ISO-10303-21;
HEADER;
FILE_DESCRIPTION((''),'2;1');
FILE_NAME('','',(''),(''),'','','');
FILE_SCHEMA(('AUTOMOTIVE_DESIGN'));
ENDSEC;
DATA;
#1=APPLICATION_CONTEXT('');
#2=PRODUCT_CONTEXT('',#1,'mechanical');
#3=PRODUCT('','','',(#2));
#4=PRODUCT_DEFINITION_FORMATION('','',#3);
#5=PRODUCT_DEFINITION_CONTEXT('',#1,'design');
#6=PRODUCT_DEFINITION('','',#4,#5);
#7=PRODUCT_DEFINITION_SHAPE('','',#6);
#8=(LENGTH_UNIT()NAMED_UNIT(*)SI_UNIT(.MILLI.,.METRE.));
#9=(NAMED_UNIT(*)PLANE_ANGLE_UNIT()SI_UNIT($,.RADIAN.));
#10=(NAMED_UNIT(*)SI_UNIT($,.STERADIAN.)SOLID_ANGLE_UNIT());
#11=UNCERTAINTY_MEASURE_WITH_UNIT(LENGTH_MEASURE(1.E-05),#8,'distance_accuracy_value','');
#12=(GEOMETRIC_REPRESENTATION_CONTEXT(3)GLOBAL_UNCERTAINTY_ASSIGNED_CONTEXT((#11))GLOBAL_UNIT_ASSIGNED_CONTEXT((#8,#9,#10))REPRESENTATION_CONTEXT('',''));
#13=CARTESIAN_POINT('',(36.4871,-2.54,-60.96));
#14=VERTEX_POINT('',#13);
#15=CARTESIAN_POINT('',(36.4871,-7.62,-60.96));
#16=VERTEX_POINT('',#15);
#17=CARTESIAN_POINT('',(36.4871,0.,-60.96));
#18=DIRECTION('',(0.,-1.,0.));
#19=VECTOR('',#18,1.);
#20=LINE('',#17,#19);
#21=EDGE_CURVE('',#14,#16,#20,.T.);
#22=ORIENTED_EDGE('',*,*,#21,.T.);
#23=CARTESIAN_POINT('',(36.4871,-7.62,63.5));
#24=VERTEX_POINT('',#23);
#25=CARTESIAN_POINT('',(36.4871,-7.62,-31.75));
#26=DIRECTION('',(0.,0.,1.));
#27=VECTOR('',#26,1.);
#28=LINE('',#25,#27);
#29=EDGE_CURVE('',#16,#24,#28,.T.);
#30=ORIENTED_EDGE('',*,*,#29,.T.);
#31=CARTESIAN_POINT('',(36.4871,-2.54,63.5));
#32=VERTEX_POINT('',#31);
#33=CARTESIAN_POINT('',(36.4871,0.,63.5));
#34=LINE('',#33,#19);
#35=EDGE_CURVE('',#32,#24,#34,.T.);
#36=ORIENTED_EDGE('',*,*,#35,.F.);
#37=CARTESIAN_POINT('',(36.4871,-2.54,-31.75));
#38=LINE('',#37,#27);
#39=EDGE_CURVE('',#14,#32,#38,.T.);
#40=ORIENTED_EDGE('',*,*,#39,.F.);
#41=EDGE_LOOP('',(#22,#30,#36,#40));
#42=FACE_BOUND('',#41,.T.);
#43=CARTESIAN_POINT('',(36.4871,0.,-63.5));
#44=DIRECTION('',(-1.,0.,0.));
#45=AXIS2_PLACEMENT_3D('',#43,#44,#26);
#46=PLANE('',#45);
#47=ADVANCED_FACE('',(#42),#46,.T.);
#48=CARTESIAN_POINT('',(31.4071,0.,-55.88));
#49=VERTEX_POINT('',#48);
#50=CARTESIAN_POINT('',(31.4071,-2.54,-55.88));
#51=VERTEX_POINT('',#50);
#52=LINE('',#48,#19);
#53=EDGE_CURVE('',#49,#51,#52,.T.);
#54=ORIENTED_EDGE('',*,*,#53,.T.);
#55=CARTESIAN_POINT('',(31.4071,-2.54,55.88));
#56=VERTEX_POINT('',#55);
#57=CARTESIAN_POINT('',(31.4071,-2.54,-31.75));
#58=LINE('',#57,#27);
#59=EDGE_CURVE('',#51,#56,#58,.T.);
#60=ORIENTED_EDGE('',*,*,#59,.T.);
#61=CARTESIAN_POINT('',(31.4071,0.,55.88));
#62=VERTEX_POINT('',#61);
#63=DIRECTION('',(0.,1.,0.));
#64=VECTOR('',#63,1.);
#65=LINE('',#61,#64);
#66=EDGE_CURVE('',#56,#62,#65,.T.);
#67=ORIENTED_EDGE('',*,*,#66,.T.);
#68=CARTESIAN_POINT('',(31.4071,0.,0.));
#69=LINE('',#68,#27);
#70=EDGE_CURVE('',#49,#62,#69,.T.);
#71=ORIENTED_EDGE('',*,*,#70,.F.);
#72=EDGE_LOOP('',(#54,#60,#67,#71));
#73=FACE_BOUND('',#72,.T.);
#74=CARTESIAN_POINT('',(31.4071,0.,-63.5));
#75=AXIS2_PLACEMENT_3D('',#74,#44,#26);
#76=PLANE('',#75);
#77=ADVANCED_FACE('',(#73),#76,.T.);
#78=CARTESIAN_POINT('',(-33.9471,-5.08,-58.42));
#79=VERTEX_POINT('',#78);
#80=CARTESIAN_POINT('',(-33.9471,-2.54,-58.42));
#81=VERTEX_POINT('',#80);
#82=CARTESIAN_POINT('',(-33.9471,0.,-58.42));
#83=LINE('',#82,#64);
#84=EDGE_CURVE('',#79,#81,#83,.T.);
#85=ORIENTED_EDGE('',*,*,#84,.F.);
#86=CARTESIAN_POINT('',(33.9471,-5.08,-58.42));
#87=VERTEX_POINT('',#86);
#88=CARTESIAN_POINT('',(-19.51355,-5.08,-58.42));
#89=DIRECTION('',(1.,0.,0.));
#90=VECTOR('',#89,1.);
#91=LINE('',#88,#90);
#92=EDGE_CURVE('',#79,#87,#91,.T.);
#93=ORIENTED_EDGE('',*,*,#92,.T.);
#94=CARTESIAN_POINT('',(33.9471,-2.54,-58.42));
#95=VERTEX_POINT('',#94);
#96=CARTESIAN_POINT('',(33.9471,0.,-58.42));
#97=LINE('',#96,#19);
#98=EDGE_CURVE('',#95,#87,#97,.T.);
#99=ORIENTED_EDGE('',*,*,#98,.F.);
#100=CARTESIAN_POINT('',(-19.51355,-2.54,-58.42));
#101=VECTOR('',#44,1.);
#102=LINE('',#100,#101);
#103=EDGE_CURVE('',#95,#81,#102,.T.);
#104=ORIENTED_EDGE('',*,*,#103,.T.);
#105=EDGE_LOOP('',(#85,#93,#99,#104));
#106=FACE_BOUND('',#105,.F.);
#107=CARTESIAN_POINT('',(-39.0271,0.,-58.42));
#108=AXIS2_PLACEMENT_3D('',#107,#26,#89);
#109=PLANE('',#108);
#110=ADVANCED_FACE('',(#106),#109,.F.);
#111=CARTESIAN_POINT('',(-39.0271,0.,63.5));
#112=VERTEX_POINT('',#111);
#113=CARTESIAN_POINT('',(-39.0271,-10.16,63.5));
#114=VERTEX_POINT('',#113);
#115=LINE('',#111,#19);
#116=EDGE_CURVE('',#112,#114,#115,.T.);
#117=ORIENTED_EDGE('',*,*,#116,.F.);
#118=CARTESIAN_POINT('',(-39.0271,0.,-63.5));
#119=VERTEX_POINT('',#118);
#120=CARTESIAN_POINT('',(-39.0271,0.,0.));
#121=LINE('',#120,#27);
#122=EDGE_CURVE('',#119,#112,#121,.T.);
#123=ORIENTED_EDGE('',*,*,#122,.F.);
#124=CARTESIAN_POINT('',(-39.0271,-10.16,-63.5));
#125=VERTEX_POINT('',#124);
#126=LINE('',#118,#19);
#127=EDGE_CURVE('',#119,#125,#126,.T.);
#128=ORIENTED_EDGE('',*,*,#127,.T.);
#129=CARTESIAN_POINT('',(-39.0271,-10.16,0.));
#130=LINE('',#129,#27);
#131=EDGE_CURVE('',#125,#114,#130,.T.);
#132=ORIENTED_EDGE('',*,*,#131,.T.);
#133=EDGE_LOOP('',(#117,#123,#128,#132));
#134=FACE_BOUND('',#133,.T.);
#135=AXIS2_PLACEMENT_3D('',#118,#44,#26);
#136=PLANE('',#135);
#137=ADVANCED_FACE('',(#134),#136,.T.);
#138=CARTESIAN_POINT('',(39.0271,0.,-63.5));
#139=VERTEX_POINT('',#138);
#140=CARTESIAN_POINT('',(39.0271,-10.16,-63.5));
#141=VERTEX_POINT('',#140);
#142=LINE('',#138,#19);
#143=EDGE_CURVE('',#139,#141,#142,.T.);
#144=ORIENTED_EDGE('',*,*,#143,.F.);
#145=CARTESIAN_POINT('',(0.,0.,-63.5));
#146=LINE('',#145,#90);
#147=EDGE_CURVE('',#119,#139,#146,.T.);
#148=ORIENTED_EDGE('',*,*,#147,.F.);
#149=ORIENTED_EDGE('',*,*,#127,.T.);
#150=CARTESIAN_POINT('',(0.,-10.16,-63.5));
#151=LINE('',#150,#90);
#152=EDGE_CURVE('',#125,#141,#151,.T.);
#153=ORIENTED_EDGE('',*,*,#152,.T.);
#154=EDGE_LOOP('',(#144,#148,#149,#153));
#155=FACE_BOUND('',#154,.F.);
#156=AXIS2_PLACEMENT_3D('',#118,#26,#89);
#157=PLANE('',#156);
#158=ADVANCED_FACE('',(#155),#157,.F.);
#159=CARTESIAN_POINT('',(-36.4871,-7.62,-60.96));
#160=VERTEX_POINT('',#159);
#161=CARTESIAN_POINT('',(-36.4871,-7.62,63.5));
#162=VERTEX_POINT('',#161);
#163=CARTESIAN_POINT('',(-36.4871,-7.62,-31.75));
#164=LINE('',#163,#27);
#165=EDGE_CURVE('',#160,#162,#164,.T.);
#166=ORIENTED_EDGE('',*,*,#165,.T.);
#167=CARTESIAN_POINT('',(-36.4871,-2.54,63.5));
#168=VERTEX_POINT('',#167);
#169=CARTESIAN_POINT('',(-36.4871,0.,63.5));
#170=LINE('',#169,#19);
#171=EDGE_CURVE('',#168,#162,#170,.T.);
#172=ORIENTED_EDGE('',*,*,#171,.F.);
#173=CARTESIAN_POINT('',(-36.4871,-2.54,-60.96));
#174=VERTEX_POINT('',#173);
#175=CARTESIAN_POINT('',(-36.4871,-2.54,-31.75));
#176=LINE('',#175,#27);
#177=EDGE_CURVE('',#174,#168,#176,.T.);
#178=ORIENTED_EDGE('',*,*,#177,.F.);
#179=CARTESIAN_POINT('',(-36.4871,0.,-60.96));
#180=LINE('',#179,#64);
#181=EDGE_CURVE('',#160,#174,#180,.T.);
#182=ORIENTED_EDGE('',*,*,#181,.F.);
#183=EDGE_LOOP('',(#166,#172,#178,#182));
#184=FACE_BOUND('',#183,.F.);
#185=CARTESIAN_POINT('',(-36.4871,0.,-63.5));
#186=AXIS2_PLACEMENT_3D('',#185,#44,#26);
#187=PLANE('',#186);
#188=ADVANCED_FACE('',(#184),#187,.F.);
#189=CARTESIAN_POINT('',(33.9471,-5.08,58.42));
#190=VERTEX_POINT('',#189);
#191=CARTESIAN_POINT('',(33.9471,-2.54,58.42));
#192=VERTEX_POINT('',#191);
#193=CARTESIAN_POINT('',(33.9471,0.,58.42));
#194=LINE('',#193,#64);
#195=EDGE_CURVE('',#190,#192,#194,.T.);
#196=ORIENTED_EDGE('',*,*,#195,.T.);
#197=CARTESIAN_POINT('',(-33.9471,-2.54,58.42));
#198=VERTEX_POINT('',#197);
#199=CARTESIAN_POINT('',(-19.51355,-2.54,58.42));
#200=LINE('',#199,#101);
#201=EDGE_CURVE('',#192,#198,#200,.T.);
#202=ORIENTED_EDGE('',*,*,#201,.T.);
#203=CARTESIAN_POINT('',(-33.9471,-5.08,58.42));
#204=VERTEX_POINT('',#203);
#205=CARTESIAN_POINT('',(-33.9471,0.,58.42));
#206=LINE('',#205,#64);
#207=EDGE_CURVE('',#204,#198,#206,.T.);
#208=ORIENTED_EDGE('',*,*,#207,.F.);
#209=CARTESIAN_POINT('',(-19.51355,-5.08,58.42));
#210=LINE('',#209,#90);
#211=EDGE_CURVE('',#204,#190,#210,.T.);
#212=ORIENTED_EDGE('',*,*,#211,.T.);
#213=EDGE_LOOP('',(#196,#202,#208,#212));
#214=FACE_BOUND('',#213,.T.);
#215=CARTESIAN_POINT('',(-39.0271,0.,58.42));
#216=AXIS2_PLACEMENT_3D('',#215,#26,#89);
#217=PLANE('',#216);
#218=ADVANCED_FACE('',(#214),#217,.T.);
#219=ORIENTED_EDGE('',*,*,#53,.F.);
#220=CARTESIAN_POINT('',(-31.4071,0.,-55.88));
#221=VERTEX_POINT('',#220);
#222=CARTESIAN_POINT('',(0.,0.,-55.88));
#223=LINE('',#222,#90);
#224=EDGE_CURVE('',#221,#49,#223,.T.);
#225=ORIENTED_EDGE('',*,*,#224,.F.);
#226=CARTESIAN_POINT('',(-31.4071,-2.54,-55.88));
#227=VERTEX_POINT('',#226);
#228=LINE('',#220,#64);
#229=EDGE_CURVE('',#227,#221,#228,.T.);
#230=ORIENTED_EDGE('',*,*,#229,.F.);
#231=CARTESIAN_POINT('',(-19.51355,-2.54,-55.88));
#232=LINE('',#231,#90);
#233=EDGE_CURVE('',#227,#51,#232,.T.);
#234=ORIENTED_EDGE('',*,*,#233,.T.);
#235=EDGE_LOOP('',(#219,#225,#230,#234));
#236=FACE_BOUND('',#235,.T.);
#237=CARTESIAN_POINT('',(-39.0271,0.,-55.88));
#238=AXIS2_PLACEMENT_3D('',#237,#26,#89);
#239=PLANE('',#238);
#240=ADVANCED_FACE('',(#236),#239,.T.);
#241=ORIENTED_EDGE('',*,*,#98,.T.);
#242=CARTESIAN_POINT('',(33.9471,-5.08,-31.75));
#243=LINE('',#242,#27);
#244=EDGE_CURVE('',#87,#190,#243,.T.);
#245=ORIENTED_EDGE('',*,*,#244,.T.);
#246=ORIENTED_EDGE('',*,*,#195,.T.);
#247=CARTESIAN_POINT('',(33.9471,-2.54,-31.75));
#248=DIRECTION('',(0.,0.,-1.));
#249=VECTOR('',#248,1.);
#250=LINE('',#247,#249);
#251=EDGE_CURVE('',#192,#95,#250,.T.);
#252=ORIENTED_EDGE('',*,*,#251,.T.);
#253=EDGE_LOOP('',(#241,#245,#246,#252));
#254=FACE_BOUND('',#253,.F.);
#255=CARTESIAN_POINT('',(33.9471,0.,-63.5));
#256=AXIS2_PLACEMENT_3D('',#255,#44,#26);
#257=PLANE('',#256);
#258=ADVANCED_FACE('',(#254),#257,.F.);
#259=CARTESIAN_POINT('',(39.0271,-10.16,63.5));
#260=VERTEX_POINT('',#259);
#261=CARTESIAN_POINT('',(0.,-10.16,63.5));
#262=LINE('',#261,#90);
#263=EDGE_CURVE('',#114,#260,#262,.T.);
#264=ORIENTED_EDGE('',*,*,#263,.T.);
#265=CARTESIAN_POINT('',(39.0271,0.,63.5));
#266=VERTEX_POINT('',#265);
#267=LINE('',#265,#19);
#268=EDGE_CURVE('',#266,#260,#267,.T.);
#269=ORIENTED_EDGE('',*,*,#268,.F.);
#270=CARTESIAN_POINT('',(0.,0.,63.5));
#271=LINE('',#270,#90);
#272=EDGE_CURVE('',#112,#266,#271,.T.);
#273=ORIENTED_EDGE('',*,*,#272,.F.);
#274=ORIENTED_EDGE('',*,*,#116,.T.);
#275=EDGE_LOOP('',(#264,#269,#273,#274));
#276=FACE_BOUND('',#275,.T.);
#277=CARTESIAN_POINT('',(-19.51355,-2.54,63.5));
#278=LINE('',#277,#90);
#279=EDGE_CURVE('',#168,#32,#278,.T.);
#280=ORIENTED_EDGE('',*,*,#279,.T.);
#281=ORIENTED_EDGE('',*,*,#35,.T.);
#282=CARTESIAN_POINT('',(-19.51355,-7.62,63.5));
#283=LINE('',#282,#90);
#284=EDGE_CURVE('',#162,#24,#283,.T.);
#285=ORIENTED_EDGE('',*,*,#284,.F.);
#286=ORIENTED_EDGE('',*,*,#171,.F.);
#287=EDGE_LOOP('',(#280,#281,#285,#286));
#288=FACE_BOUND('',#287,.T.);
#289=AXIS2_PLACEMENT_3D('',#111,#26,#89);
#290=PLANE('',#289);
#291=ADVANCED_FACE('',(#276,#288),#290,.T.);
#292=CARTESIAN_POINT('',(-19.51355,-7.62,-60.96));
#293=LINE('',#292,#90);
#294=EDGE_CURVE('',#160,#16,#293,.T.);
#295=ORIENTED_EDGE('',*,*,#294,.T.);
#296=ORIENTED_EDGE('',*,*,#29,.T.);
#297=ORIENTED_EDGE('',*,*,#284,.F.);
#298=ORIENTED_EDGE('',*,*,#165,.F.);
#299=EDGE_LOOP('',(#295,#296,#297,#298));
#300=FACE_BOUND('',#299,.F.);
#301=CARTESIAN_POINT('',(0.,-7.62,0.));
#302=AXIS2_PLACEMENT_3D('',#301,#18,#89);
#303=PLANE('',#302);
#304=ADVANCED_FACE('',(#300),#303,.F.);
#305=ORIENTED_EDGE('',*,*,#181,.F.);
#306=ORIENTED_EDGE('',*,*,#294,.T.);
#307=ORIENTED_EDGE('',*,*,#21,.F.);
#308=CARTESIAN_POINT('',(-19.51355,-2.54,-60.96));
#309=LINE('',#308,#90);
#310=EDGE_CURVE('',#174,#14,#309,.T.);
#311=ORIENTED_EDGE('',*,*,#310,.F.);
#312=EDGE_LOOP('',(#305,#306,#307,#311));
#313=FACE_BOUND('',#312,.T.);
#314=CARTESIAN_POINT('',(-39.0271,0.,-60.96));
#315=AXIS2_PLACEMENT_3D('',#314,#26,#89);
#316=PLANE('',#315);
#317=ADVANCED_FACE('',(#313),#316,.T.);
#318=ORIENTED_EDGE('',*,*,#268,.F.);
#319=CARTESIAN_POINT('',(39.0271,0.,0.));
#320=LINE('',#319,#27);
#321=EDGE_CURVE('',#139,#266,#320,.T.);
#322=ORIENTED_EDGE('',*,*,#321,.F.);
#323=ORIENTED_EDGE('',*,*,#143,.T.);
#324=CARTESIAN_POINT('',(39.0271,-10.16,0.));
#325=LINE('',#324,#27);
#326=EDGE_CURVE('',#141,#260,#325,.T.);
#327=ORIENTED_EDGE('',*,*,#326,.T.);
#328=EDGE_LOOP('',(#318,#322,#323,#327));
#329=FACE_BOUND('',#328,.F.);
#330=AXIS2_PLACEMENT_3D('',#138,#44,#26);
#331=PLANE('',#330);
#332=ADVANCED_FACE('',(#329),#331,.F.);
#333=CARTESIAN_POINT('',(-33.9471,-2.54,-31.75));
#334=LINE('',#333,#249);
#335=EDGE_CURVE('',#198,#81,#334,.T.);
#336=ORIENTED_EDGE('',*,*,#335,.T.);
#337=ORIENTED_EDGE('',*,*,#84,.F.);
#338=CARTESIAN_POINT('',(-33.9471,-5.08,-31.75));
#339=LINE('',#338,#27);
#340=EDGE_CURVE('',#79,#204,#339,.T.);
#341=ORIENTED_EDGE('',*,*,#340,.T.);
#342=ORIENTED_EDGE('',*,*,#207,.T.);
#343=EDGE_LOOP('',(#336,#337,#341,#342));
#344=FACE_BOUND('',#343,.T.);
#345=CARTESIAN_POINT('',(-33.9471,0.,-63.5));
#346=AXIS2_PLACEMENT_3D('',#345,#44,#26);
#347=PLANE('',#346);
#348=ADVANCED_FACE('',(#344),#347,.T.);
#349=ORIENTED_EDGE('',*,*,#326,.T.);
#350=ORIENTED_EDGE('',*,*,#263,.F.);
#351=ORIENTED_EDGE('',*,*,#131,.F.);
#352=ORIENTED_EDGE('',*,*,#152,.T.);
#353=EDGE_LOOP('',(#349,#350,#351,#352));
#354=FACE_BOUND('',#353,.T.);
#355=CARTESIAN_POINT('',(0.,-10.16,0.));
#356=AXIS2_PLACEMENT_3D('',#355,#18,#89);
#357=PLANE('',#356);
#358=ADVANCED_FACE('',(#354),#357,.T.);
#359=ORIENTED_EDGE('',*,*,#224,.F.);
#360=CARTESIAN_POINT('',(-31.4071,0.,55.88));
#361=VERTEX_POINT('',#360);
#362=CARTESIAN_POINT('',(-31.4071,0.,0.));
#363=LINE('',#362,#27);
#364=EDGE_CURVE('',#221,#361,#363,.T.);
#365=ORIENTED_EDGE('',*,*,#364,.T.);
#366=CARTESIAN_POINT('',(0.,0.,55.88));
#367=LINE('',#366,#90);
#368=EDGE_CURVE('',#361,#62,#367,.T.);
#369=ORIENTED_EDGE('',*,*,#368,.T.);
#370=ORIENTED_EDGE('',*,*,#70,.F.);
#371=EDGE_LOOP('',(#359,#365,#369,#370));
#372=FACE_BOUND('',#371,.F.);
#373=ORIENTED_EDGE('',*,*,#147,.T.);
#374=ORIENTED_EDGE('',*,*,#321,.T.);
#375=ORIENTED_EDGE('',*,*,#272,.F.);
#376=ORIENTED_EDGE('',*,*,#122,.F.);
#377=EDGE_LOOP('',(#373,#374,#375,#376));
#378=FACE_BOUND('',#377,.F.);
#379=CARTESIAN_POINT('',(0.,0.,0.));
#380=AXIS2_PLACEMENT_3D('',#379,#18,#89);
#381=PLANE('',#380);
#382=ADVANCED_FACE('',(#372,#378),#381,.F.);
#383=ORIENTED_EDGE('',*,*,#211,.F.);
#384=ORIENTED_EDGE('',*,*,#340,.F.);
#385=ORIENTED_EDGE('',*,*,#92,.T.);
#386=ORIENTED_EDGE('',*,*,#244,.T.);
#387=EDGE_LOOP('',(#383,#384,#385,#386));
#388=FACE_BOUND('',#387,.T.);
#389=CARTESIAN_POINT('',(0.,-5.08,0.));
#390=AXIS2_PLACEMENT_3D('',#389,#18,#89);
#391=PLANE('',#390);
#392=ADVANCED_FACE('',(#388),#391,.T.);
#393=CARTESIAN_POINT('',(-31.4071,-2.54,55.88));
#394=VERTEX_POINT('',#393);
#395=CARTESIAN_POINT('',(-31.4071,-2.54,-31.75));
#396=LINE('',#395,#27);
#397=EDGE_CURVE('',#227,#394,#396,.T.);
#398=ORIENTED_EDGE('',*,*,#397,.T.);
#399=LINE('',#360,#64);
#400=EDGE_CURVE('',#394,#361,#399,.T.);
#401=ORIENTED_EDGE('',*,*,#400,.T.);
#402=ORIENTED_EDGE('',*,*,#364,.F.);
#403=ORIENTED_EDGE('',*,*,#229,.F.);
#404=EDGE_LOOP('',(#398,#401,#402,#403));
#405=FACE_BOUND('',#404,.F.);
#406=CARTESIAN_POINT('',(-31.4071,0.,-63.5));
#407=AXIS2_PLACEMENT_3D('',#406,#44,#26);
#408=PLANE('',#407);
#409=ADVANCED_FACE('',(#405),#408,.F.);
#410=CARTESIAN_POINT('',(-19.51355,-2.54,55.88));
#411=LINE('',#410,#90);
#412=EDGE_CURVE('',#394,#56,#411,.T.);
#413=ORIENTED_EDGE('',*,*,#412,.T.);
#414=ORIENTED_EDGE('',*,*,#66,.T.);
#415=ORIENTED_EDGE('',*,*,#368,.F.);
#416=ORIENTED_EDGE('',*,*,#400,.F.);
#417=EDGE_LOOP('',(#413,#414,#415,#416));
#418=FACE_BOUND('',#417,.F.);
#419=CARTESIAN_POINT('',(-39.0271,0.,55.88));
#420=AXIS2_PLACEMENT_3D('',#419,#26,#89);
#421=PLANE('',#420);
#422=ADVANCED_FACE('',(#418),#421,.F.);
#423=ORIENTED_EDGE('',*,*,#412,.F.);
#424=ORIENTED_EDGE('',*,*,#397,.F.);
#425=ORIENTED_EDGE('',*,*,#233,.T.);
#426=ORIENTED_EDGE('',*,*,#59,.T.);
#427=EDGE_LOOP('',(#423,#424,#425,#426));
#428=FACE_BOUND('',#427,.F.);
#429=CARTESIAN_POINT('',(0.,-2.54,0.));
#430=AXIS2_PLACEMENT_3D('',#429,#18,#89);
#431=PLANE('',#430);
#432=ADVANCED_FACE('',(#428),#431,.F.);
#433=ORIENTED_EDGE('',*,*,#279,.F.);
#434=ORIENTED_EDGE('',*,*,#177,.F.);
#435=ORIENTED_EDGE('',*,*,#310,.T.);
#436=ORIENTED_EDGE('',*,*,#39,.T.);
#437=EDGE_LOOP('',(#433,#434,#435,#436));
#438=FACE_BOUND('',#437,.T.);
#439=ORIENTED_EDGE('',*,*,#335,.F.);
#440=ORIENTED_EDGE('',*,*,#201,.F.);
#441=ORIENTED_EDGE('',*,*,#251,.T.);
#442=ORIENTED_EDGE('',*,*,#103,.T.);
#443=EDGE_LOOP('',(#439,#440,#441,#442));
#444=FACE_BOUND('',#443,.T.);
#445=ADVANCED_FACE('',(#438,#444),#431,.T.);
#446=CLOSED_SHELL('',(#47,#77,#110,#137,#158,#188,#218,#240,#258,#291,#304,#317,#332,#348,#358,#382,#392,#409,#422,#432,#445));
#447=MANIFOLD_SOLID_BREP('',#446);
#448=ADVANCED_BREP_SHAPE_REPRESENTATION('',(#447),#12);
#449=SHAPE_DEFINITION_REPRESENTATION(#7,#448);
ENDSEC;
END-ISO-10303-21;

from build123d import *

# Parameters (mm, degrees)
F0_W     = 78.0542
F0_H     = 127
F1_DEPTH = 10.16
F2_T     = -7.62
F3_T     = -2.54


with BuildPart() as f1:
    # F0 (on Front) → F1 (new body)
    with BuildSketch(Plane.XZ):
        Rectangle(F0_W, F0_H)
    extrude(amount=F1_DEPTH)

    # F2
    f2_openings = [f1.faces().sort_by_distance(p)[0] for p in [
        (0, 0, 0),
    ]]
    offset(amount=F2_T, openings=f2_openings)

    # F3
    f3_openings = [f1.faces().sort_by_distance(p)[0] for p in [
        (0, -5.08, 63.5),
    ]]
    offset(amount=F3_T, openings=f3_openings, kind=Kind.INTERSECTION)


solid = f1.part
